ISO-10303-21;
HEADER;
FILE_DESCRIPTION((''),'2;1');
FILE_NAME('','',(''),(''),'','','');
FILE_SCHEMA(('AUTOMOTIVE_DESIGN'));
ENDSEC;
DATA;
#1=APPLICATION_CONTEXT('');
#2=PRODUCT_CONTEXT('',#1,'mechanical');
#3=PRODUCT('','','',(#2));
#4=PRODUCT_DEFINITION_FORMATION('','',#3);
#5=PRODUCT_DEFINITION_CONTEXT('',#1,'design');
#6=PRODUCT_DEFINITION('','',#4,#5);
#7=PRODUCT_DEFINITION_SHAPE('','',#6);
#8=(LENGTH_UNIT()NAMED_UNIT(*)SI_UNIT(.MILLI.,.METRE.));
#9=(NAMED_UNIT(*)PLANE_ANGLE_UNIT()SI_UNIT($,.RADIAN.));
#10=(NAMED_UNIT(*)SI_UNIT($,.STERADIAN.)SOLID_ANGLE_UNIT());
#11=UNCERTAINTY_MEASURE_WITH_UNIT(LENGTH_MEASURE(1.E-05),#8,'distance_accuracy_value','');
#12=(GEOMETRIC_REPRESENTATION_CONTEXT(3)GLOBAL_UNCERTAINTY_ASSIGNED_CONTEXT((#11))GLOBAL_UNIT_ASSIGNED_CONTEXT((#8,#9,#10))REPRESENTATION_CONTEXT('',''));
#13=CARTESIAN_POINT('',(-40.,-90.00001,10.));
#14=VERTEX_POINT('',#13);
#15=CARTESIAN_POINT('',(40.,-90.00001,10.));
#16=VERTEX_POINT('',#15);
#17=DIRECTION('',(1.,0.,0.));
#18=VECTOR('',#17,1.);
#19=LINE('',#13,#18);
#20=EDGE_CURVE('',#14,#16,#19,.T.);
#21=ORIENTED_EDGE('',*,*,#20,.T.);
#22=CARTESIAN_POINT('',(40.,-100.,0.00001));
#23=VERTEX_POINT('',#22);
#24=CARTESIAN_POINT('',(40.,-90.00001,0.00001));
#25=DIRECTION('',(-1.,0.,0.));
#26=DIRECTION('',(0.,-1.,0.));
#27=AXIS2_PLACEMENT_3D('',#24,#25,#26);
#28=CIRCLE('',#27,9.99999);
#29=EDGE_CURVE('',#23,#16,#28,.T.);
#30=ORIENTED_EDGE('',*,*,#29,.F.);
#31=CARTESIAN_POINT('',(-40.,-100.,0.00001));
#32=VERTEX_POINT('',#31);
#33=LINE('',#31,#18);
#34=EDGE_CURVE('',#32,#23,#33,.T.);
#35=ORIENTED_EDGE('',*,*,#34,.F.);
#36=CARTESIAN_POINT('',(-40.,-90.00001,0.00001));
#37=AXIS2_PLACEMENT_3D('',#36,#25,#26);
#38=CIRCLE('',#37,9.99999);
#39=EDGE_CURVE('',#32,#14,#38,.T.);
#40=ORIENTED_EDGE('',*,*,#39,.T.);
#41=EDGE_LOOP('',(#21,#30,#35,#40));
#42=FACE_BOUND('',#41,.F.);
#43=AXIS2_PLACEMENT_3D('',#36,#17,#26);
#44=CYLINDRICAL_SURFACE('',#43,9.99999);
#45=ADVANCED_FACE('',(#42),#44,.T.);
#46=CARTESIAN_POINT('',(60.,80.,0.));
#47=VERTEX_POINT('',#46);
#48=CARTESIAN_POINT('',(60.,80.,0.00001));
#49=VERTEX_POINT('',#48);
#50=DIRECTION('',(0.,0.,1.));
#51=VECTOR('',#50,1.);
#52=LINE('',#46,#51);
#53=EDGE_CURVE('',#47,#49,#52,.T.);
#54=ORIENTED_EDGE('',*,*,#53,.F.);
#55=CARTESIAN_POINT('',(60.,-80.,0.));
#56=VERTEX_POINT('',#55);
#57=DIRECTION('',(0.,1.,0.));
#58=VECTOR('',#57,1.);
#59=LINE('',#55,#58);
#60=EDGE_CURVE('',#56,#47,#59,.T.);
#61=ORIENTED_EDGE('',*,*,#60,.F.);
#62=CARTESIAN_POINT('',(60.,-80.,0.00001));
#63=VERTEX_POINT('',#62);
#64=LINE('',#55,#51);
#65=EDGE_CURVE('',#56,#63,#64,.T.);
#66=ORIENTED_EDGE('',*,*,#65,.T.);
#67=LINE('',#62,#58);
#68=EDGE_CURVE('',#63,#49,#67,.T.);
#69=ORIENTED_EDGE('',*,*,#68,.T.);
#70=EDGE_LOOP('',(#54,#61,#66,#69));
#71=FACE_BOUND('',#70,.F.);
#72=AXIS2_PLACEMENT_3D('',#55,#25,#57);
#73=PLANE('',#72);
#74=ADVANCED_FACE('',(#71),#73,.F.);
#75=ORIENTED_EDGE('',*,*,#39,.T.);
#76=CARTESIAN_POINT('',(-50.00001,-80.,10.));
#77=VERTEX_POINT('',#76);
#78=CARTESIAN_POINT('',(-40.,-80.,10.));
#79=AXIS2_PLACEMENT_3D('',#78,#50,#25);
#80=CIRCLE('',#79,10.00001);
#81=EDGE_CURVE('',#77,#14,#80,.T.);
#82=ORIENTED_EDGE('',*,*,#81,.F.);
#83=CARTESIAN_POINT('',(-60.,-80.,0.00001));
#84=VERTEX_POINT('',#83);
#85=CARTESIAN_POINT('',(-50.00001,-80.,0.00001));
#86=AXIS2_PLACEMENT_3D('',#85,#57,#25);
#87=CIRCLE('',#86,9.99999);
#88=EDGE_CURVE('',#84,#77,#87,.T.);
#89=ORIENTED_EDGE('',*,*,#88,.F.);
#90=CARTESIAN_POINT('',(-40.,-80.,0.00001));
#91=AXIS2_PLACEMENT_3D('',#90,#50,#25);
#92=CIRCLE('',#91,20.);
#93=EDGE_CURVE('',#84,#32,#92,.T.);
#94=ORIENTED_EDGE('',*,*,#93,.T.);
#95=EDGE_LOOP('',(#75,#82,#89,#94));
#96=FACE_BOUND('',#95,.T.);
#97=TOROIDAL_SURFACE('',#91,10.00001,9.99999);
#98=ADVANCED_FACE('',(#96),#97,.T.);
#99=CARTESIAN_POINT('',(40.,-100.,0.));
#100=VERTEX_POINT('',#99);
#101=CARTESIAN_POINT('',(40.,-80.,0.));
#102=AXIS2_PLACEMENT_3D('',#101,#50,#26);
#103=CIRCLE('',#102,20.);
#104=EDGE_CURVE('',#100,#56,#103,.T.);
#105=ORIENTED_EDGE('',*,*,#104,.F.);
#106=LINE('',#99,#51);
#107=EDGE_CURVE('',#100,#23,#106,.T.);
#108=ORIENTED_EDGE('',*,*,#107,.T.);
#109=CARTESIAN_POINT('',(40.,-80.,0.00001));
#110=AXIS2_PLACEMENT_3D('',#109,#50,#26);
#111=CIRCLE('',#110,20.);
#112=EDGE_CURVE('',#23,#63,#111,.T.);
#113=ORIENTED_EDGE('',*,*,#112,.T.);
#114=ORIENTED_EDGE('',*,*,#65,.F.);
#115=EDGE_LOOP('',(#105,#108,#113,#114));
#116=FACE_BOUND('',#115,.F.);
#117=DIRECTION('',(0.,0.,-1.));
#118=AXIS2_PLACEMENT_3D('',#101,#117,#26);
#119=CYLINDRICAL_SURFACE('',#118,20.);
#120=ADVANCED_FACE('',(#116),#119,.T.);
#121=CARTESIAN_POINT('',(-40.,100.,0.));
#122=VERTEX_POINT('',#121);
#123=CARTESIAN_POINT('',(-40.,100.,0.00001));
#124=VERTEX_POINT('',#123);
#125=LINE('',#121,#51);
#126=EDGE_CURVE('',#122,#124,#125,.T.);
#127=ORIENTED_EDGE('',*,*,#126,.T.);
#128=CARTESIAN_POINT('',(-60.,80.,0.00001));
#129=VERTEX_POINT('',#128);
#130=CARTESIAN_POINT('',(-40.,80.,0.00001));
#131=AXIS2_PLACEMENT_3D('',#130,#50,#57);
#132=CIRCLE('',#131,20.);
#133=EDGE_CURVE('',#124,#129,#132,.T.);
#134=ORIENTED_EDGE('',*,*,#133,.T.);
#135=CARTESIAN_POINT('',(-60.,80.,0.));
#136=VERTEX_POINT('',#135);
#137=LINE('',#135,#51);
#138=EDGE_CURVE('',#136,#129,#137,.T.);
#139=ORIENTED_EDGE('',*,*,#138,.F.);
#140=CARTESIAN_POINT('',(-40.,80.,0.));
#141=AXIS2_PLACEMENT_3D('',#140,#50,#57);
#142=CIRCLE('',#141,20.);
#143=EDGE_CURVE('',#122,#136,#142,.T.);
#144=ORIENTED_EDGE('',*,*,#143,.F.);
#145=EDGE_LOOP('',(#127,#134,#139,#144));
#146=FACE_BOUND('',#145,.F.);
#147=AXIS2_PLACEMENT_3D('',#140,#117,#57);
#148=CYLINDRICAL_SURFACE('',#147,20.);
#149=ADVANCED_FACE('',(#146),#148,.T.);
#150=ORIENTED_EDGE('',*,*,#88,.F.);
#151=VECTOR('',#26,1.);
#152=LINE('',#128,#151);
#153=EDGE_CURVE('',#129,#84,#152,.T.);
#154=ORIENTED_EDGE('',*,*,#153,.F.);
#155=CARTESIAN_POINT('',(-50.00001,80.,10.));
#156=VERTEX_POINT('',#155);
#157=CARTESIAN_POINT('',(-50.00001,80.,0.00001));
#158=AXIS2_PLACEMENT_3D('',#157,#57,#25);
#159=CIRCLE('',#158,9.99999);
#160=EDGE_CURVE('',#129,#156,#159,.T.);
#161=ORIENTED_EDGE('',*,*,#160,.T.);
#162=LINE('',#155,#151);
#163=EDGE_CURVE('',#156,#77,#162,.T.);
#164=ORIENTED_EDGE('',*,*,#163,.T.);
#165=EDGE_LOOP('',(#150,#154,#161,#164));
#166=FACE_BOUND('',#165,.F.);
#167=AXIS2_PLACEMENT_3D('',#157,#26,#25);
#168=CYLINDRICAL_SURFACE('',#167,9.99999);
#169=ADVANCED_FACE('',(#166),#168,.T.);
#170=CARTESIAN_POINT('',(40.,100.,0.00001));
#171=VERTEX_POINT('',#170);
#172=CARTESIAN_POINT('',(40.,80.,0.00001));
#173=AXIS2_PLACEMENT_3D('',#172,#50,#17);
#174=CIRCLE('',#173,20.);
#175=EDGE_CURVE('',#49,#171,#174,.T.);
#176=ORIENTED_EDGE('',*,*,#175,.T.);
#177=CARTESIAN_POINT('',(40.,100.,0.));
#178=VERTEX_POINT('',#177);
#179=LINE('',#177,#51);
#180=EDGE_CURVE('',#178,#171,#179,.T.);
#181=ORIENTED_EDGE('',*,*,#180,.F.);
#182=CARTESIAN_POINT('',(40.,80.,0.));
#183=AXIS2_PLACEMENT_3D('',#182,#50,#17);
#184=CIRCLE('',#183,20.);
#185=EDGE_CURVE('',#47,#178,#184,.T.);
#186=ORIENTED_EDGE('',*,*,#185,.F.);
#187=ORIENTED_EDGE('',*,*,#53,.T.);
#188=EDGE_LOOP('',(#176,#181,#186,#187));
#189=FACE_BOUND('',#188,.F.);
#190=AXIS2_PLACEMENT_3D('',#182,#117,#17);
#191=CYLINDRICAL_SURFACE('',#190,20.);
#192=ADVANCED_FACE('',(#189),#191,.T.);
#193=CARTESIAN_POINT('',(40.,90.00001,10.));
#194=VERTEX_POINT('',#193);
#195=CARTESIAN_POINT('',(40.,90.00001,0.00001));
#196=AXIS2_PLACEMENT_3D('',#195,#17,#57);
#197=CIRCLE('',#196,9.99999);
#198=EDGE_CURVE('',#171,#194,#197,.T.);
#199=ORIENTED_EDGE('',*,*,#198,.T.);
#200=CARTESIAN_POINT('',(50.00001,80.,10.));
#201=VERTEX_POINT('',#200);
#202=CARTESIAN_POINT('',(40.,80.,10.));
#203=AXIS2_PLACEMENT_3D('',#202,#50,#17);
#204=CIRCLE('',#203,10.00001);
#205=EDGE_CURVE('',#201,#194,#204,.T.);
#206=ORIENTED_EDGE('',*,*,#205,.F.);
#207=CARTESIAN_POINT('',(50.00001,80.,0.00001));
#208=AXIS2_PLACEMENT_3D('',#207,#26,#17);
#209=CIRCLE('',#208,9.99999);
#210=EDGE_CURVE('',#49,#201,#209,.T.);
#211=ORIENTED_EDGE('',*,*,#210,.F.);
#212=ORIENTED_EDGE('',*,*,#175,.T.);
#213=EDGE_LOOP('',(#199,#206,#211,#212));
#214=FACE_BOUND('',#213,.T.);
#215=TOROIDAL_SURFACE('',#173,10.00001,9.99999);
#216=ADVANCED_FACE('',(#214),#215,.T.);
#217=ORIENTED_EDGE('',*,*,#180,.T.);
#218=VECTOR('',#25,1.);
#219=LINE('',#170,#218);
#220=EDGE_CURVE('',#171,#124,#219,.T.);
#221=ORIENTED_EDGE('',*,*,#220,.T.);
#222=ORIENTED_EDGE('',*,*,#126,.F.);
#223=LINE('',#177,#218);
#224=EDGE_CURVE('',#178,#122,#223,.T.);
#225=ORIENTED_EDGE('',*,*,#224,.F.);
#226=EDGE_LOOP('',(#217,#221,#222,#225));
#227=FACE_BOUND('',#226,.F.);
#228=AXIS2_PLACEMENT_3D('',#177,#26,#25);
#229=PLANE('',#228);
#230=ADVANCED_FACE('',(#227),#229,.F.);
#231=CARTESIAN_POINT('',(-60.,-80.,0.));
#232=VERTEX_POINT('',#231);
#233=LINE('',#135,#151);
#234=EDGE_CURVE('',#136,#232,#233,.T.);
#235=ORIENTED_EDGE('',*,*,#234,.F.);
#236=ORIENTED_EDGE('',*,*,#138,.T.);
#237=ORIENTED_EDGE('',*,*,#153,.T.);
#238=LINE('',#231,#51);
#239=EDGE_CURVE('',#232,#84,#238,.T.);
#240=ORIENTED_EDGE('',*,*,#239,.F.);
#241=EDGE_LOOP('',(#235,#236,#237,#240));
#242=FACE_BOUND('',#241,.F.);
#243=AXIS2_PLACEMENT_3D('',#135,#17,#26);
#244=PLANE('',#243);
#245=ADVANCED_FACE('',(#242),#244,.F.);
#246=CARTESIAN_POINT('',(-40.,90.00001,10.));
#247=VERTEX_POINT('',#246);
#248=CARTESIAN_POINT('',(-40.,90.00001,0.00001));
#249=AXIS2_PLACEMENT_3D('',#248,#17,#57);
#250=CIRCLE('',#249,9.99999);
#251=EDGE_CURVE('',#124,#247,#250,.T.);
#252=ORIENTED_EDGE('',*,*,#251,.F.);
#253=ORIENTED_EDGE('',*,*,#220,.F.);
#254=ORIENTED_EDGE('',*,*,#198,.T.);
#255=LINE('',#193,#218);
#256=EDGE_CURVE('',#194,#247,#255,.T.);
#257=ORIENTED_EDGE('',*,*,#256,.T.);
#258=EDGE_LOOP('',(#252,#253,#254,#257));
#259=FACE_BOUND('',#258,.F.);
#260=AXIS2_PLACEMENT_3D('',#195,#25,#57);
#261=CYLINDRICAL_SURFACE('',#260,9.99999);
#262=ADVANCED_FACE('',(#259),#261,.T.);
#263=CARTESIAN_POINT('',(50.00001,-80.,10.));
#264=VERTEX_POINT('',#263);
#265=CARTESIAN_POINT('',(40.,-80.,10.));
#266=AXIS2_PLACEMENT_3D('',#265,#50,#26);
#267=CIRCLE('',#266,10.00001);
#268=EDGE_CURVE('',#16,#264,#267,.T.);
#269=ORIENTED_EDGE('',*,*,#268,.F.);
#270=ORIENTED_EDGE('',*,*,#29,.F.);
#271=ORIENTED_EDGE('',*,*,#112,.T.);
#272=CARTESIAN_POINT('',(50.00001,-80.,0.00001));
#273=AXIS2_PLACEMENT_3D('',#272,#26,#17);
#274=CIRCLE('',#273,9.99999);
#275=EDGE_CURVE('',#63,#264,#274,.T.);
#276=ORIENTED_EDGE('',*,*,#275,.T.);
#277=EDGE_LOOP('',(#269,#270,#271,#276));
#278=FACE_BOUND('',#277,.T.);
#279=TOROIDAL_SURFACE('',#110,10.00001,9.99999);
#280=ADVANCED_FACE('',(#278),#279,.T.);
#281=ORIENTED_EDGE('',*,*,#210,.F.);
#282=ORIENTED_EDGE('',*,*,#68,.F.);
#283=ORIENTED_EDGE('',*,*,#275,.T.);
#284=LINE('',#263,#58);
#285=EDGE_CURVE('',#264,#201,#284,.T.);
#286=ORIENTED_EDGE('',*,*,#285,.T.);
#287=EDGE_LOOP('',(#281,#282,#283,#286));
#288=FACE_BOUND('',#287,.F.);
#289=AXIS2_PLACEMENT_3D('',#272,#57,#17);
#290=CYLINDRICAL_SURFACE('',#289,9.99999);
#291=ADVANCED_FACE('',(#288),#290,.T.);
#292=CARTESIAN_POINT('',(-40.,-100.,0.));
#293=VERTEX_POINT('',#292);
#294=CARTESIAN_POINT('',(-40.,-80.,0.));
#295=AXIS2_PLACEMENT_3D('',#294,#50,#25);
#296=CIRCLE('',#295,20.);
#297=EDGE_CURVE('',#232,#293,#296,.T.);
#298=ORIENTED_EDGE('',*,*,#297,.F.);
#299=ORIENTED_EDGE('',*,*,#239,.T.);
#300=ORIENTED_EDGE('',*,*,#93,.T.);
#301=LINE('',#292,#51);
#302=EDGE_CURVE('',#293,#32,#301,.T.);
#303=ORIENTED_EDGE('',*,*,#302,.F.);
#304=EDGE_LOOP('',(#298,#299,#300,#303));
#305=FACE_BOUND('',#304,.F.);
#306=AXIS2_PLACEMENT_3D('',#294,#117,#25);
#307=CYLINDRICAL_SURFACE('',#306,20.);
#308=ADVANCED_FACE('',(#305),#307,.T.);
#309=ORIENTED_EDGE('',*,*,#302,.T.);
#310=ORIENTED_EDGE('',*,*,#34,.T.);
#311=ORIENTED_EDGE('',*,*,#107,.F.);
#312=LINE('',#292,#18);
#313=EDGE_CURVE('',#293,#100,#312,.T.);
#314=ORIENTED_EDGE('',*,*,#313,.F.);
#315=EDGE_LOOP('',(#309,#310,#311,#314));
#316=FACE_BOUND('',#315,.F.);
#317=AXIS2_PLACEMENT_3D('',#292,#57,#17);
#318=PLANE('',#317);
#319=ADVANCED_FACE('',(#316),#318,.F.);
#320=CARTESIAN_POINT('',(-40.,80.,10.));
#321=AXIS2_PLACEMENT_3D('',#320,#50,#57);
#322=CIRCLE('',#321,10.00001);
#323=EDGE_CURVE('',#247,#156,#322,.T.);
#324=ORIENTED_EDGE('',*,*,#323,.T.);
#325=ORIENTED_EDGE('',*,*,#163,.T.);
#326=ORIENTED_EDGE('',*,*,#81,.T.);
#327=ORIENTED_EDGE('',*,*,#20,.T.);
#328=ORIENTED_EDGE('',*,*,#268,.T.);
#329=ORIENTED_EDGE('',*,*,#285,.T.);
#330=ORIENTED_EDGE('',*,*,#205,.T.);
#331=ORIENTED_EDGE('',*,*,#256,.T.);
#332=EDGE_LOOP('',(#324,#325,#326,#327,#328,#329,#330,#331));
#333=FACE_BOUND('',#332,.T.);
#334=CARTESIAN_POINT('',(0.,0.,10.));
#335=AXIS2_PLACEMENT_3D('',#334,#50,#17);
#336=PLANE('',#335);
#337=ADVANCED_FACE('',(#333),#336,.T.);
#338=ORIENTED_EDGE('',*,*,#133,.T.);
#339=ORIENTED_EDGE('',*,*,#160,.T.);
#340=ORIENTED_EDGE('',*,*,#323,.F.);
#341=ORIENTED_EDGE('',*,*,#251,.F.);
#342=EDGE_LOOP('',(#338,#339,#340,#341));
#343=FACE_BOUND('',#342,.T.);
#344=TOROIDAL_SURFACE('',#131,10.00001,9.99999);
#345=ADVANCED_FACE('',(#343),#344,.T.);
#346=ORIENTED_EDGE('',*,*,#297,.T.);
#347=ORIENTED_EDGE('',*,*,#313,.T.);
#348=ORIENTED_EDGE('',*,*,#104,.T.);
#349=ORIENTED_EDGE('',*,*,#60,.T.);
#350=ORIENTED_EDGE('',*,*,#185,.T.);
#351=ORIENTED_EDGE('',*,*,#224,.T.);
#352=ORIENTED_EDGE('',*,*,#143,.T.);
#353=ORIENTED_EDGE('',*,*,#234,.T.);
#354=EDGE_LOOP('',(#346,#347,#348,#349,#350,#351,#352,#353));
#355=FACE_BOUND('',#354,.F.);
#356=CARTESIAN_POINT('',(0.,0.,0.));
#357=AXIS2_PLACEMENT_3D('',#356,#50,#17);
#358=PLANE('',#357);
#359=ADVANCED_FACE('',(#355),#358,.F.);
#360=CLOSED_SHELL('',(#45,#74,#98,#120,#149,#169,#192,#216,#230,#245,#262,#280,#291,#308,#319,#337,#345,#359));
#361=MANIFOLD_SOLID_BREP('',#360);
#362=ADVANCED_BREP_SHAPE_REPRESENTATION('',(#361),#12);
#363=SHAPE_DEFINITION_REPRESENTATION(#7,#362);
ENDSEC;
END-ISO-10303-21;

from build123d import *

# Parameters (mm, degrees)
F1_DEPTH = 10
F2_R     = 9.99999


# Not quite as in the source:
# - a fillet or chamfer is up to 0.001 mm smaller than in the source, because OpenCascade refuses the exact size


with BuildPart() as f1:
    # F0 (on Top) → F1 (new body)
    with BuildSketch(Plane.XY):
        with BuildLine():
            Line((40, 100), (-40, 100))
            ThreePointArc((-40, 100), (-54.1421356237, 94.1421356237), (-60, 80))
            Line((-60, 80), (-60, -80))
            ThreePointArc((-60, -80), (-54.1421356237, -94.1421356237), (-40, -100))
            Line((-40, -100), (40, -100))
            ThreePointArc((40, -100), (54.1421356237, -94.1421356237), (60, -80))
            Line((60, -80), (60, 80))
            ThreePointArc((60, 80), (54.1421356237, 94.1421356237), (40, 100))
        make_face()
    extrude(amount=F1_DEPTH)

    # F2 (radius 10 in the source; OpenCascade refuses exactly that, so slightly less here)
    f2_edges = [f1.edges().sort_by_distance(p)[0] for p in [
        (-60, 0, 10),
    ]]
    fillet(f2_edges, radius=F2_R)


solid = f1.part
